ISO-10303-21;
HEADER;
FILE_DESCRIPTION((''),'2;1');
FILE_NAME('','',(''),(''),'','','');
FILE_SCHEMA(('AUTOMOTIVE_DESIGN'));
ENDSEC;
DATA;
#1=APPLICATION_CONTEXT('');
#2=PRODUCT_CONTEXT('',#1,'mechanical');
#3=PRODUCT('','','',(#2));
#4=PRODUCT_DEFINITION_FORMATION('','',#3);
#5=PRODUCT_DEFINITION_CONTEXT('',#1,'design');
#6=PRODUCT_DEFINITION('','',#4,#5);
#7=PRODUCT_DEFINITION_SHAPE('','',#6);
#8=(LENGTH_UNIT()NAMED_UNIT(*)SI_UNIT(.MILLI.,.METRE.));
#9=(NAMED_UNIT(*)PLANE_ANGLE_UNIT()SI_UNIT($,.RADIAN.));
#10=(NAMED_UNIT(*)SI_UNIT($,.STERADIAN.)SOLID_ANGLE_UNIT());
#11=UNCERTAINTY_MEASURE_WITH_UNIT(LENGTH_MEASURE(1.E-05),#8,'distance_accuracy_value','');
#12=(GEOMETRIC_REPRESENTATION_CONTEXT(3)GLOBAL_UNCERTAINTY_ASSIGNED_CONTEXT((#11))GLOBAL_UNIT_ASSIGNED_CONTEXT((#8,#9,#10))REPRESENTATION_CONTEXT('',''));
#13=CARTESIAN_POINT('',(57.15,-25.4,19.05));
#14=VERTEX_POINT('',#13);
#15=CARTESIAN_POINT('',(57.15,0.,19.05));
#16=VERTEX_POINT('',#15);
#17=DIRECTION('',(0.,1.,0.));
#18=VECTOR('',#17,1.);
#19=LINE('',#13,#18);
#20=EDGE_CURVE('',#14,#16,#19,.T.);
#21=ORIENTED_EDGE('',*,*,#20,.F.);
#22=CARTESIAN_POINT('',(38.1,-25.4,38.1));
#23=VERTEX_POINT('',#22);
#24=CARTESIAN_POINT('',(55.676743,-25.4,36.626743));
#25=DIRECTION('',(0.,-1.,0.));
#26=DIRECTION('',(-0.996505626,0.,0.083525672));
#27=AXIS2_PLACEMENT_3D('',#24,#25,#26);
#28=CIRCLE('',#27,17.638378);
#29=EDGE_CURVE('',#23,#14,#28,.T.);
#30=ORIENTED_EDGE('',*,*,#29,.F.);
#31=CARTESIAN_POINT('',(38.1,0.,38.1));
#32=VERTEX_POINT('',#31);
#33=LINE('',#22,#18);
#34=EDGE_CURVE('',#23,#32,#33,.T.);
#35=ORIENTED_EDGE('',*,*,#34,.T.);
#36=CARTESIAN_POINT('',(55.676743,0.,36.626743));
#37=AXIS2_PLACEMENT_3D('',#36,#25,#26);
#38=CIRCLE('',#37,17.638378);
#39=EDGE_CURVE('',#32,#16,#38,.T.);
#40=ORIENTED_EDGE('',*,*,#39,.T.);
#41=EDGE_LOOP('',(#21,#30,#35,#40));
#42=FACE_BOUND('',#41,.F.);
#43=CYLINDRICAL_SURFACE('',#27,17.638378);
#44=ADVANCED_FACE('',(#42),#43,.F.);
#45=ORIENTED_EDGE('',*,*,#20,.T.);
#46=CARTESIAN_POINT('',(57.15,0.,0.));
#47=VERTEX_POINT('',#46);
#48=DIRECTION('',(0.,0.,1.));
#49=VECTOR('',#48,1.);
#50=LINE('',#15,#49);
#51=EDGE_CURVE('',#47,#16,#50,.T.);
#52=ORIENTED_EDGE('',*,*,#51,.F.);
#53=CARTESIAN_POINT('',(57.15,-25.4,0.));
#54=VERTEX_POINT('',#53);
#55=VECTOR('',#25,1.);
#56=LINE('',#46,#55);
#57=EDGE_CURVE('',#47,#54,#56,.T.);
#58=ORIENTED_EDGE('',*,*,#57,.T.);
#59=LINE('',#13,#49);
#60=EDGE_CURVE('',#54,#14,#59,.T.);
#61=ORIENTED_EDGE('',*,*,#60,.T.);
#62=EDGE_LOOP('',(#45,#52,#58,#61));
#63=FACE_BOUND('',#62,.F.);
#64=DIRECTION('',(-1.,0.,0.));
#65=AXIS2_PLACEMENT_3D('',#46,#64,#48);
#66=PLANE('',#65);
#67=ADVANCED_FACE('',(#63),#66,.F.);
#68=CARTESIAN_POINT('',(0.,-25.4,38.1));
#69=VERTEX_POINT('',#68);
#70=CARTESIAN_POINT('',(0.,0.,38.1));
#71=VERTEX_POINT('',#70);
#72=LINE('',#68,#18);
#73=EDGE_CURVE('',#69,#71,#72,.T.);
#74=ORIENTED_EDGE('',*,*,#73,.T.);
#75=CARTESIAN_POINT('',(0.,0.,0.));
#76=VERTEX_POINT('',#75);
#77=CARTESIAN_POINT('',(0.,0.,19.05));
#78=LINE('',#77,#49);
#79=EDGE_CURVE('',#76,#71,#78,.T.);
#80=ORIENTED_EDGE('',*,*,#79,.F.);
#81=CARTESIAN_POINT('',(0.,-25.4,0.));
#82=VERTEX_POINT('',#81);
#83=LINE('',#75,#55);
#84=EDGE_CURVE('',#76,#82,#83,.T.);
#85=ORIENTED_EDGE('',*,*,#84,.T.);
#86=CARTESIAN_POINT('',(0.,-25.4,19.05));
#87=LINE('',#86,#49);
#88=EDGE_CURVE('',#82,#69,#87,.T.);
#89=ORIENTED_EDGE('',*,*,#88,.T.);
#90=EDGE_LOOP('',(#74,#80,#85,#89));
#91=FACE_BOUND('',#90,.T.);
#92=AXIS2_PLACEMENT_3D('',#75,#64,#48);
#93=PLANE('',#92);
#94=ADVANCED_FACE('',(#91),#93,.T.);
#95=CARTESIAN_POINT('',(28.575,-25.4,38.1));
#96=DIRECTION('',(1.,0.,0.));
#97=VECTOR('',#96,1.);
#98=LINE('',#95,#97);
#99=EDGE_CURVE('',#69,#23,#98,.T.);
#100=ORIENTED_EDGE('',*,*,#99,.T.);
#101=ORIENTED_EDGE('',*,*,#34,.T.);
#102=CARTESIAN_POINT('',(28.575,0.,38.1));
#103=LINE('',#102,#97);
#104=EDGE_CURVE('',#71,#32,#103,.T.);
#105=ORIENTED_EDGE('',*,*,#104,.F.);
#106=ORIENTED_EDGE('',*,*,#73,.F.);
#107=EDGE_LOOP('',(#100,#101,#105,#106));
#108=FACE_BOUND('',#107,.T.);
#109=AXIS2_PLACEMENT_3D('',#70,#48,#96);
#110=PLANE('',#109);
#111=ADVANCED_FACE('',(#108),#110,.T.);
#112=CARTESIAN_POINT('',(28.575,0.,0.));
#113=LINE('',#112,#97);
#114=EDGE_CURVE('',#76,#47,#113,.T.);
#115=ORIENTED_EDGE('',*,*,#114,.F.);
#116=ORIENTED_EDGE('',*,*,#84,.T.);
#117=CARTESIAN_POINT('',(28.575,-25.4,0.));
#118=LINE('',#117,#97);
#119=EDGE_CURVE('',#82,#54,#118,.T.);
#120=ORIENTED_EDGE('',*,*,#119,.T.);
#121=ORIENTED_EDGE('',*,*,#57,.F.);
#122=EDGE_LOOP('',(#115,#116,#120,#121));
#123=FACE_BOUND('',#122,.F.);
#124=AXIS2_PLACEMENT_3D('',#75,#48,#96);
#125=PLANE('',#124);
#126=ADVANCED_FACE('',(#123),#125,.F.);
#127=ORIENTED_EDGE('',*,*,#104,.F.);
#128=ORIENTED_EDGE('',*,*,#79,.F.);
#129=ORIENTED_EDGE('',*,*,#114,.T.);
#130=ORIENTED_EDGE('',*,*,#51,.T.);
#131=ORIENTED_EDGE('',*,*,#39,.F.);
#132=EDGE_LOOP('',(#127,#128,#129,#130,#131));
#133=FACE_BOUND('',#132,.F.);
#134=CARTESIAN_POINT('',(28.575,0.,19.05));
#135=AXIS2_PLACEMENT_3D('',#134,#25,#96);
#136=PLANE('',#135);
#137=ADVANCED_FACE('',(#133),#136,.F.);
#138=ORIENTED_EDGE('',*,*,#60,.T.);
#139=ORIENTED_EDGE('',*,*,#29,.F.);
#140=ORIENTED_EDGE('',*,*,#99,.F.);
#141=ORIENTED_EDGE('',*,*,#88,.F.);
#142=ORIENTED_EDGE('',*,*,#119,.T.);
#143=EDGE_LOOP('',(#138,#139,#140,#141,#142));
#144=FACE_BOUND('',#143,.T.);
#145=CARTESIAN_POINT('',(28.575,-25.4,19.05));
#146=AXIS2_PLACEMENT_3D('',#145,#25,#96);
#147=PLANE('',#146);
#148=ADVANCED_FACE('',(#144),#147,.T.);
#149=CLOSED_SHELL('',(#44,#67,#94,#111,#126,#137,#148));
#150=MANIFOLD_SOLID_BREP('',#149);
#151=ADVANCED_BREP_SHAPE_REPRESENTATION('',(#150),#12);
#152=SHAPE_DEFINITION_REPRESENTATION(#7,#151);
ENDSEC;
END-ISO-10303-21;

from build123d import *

# Parameters (mm, degrees)
F0_W     = 57.15
F0_H     = 38.1
F1_DEPTH = 25.4
F3_DEPTH = 25.4
F4_W     = 15.0772607885
F4_H     = 19.0978627652
F5_DEPTH = 107
F7_DEPTH = 107
F8_W     = 12.6649001613
F8_H     = 19.2988961935
F9_DEPTH = 107


# Not quite as in the source:
# - an extrude ends at something that could not be found from the text; its depth is read off the source's solid


with BuildPart() as f1:
    # F0 (on Front) → F1 (new body)
    with BuildSketch(Plane.XZ):
        with Locations((28.575, 19.05)):
            Rectangle(F0_W, F0_H)
    extrude(amount=F1_DEPTH)

    # F2 (on face) → F3 (cut)
    with BuildSketch(Plane.XZ.offset(25.4)):
        with BuildLine():
            Line((57.15, 38.1), (38.1, 38.1))
            ThreePointArc((38.1, 38.1), (43.2045261365, 24.1545261365), (57.15, 19.05))
            Line((57.15, 19.05), (57.15, 38.1))
        make_face()
    extrude(amount=-F3_DEPTH, mode=Mode.SUBTRACT)

    # F4 (on Right) → F5 (cut, through all)
    with BuildSketch(Plane.YZ):
        with Locations((-12.0618094224, 28.9483414963)):
            Rectangle(F4_W, F4_H)
    extrude(amount=-F5_DEPTH, mode=Mode.SUBTRACT)

    # F6 (on Right) → F7 (cut, through all)
    with BuildSketch(Plane.YZ):
        Polygon((-6.7345094867, 37.8941856325), (-18.3942597359, 38.2962450385), (-18.3942597359, 24.6261935681), (-6.7345094867, 24.6261935681), align=None)
    extrude(amount=-F7_DEPTH, mode=Mode.SUBTRACT)

    # F8 (on Right) → F9 (cut, through all)
    with BuildSketch(Plane.YZ):
        with Locations((-11.2576889805, 28.6467969418)):
            Rectangle(F8_W, F8_H)
    extrude(amount=-F9_DEPTH, mode=Mode.SUBTRACT)


solid = f1.part
